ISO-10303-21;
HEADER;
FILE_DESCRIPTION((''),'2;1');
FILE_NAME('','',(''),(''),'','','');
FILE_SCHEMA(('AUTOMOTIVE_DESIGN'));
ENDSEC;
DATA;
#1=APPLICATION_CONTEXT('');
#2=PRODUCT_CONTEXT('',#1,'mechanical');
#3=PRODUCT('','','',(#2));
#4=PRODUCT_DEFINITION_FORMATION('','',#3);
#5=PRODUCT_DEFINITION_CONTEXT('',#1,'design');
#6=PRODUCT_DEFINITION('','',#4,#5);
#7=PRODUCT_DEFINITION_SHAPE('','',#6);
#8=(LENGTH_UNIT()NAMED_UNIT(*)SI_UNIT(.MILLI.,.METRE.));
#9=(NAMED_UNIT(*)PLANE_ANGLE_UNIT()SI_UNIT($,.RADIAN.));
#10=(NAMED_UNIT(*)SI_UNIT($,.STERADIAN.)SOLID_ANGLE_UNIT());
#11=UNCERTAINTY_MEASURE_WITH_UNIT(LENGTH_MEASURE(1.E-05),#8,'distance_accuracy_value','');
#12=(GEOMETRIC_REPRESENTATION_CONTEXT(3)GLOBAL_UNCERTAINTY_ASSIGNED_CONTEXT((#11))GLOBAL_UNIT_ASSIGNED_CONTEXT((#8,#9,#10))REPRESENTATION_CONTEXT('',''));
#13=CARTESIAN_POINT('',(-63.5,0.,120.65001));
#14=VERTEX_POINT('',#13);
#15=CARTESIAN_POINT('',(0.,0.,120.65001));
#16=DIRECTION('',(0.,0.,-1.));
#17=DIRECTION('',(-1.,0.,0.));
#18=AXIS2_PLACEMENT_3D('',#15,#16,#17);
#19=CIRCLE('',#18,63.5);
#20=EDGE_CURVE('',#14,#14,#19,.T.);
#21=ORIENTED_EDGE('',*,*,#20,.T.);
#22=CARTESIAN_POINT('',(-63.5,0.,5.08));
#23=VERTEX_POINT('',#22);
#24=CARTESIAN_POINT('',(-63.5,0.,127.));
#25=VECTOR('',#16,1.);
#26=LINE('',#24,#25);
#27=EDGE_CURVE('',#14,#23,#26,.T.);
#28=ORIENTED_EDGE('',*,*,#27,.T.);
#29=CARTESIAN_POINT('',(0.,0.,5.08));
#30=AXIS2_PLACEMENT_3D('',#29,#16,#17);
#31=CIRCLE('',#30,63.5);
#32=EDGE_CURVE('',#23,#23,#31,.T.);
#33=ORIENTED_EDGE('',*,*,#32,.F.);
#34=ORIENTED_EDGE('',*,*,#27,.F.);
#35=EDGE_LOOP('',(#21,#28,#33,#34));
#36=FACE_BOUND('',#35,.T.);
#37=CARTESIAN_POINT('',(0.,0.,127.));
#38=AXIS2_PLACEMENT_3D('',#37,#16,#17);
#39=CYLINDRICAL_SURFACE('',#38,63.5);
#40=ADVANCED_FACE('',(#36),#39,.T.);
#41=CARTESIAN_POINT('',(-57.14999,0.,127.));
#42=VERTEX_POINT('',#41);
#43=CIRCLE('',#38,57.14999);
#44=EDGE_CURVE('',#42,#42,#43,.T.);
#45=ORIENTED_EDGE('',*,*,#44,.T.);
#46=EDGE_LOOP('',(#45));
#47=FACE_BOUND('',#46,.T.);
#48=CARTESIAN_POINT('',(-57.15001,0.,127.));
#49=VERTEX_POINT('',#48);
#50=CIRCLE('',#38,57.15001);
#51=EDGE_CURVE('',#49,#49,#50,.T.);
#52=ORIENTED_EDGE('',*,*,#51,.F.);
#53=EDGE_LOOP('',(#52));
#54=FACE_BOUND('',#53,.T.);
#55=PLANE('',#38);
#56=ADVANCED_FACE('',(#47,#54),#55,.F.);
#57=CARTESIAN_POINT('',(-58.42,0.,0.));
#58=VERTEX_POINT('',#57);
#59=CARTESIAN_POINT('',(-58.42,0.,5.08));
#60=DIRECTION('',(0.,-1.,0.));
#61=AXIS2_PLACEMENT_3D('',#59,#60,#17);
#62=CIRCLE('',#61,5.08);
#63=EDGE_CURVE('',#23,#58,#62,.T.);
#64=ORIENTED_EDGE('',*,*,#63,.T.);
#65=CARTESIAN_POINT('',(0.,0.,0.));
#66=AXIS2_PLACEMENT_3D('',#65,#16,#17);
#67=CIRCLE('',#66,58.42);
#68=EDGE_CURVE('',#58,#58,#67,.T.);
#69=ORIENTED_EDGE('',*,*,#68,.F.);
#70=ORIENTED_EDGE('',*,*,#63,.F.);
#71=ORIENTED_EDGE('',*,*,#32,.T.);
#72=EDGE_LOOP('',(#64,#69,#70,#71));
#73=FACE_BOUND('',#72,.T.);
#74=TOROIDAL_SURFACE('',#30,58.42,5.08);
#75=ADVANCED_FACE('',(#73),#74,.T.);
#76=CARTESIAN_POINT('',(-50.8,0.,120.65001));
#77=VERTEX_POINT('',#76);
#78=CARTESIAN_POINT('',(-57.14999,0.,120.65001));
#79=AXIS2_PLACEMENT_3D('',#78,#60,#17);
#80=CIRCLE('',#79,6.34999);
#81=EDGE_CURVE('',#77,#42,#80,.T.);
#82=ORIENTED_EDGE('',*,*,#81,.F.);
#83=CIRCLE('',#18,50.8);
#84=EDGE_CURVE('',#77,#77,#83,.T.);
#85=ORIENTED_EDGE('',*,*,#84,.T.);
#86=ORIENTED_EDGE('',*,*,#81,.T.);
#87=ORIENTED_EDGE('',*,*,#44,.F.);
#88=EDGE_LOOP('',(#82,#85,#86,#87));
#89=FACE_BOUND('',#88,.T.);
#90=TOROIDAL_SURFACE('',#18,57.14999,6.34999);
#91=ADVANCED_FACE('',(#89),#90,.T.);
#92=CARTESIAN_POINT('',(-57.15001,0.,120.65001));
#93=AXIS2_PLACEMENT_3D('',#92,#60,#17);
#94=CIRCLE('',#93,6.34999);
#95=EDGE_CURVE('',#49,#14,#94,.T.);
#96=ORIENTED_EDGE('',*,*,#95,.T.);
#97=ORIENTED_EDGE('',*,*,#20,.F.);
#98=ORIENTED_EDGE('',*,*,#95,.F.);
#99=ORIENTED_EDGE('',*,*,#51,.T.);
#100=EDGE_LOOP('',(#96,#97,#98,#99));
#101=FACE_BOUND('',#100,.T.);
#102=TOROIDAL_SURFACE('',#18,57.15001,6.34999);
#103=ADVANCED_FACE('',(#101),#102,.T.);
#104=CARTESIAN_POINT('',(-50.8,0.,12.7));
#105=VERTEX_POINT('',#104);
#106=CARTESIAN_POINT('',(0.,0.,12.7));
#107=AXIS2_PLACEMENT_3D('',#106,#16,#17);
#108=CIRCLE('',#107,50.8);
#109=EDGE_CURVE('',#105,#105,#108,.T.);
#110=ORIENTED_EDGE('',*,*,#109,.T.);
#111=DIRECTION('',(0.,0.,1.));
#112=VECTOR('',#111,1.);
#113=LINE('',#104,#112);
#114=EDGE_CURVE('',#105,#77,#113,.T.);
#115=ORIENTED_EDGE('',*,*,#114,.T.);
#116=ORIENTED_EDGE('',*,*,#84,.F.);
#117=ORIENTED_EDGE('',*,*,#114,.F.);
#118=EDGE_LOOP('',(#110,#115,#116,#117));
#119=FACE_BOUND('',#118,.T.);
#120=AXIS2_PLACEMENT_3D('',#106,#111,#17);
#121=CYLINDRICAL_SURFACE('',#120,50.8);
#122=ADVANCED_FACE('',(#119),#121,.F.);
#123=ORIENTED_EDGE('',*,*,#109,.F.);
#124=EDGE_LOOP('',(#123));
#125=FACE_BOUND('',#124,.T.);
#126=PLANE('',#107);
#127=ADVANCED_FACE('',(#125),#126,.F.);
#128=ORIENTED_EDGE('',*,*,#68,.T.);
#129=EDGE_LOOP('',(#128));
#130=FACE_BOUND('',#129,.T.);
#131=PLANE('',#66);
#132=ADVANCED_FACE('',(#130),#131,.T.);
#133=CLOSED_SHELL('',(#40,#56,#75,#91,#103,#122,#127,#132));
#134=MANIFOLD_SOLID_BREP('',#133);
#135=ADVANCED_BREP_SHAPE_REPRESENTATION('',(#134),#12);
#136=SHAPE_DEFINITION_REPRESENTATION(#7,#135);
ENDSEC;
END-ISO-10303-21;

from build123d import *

# Parameters (mm, degrees)
F2_R = 6.34999
F3_R = 5.08


# Not quite as in the source:
# - a fillet or chamfer is up to 0.001 mm smaller than in the source, because OpenCascade refuses the exact size


with BuildPart() as f1:
    # F0 (on Front) → F1 (revolve)
    with BuildSketch(Plane.XZ):
        Polygon((-63.5, 0), (0, 0), (0, 12.7), (-50.8, 12.7), (-50.8, 127), (-63.5, 127), align=None)
    revolve(axis=Axis((0, 0, 6.35), (0, 0, -1)))

    # F2 (radius 6.35 in the source; OpenCascade refuses exactly that, so slightly less here)
    f2_edges = [f1.edges().sort_by_distance(p)[0] for p in [
        (63.5, 0, 127),
        (50.8, 0, 127),
    ]]
    fillet(f2_edges, radius=F2_R)

    # F3
    f3_edges = [f1.edges().sort_by_distance(p)[0] for p in [
        (63.5, 0, 0),
    ]]
    fillet(f3_edges, radius=F3_R)


solid = f1.part
